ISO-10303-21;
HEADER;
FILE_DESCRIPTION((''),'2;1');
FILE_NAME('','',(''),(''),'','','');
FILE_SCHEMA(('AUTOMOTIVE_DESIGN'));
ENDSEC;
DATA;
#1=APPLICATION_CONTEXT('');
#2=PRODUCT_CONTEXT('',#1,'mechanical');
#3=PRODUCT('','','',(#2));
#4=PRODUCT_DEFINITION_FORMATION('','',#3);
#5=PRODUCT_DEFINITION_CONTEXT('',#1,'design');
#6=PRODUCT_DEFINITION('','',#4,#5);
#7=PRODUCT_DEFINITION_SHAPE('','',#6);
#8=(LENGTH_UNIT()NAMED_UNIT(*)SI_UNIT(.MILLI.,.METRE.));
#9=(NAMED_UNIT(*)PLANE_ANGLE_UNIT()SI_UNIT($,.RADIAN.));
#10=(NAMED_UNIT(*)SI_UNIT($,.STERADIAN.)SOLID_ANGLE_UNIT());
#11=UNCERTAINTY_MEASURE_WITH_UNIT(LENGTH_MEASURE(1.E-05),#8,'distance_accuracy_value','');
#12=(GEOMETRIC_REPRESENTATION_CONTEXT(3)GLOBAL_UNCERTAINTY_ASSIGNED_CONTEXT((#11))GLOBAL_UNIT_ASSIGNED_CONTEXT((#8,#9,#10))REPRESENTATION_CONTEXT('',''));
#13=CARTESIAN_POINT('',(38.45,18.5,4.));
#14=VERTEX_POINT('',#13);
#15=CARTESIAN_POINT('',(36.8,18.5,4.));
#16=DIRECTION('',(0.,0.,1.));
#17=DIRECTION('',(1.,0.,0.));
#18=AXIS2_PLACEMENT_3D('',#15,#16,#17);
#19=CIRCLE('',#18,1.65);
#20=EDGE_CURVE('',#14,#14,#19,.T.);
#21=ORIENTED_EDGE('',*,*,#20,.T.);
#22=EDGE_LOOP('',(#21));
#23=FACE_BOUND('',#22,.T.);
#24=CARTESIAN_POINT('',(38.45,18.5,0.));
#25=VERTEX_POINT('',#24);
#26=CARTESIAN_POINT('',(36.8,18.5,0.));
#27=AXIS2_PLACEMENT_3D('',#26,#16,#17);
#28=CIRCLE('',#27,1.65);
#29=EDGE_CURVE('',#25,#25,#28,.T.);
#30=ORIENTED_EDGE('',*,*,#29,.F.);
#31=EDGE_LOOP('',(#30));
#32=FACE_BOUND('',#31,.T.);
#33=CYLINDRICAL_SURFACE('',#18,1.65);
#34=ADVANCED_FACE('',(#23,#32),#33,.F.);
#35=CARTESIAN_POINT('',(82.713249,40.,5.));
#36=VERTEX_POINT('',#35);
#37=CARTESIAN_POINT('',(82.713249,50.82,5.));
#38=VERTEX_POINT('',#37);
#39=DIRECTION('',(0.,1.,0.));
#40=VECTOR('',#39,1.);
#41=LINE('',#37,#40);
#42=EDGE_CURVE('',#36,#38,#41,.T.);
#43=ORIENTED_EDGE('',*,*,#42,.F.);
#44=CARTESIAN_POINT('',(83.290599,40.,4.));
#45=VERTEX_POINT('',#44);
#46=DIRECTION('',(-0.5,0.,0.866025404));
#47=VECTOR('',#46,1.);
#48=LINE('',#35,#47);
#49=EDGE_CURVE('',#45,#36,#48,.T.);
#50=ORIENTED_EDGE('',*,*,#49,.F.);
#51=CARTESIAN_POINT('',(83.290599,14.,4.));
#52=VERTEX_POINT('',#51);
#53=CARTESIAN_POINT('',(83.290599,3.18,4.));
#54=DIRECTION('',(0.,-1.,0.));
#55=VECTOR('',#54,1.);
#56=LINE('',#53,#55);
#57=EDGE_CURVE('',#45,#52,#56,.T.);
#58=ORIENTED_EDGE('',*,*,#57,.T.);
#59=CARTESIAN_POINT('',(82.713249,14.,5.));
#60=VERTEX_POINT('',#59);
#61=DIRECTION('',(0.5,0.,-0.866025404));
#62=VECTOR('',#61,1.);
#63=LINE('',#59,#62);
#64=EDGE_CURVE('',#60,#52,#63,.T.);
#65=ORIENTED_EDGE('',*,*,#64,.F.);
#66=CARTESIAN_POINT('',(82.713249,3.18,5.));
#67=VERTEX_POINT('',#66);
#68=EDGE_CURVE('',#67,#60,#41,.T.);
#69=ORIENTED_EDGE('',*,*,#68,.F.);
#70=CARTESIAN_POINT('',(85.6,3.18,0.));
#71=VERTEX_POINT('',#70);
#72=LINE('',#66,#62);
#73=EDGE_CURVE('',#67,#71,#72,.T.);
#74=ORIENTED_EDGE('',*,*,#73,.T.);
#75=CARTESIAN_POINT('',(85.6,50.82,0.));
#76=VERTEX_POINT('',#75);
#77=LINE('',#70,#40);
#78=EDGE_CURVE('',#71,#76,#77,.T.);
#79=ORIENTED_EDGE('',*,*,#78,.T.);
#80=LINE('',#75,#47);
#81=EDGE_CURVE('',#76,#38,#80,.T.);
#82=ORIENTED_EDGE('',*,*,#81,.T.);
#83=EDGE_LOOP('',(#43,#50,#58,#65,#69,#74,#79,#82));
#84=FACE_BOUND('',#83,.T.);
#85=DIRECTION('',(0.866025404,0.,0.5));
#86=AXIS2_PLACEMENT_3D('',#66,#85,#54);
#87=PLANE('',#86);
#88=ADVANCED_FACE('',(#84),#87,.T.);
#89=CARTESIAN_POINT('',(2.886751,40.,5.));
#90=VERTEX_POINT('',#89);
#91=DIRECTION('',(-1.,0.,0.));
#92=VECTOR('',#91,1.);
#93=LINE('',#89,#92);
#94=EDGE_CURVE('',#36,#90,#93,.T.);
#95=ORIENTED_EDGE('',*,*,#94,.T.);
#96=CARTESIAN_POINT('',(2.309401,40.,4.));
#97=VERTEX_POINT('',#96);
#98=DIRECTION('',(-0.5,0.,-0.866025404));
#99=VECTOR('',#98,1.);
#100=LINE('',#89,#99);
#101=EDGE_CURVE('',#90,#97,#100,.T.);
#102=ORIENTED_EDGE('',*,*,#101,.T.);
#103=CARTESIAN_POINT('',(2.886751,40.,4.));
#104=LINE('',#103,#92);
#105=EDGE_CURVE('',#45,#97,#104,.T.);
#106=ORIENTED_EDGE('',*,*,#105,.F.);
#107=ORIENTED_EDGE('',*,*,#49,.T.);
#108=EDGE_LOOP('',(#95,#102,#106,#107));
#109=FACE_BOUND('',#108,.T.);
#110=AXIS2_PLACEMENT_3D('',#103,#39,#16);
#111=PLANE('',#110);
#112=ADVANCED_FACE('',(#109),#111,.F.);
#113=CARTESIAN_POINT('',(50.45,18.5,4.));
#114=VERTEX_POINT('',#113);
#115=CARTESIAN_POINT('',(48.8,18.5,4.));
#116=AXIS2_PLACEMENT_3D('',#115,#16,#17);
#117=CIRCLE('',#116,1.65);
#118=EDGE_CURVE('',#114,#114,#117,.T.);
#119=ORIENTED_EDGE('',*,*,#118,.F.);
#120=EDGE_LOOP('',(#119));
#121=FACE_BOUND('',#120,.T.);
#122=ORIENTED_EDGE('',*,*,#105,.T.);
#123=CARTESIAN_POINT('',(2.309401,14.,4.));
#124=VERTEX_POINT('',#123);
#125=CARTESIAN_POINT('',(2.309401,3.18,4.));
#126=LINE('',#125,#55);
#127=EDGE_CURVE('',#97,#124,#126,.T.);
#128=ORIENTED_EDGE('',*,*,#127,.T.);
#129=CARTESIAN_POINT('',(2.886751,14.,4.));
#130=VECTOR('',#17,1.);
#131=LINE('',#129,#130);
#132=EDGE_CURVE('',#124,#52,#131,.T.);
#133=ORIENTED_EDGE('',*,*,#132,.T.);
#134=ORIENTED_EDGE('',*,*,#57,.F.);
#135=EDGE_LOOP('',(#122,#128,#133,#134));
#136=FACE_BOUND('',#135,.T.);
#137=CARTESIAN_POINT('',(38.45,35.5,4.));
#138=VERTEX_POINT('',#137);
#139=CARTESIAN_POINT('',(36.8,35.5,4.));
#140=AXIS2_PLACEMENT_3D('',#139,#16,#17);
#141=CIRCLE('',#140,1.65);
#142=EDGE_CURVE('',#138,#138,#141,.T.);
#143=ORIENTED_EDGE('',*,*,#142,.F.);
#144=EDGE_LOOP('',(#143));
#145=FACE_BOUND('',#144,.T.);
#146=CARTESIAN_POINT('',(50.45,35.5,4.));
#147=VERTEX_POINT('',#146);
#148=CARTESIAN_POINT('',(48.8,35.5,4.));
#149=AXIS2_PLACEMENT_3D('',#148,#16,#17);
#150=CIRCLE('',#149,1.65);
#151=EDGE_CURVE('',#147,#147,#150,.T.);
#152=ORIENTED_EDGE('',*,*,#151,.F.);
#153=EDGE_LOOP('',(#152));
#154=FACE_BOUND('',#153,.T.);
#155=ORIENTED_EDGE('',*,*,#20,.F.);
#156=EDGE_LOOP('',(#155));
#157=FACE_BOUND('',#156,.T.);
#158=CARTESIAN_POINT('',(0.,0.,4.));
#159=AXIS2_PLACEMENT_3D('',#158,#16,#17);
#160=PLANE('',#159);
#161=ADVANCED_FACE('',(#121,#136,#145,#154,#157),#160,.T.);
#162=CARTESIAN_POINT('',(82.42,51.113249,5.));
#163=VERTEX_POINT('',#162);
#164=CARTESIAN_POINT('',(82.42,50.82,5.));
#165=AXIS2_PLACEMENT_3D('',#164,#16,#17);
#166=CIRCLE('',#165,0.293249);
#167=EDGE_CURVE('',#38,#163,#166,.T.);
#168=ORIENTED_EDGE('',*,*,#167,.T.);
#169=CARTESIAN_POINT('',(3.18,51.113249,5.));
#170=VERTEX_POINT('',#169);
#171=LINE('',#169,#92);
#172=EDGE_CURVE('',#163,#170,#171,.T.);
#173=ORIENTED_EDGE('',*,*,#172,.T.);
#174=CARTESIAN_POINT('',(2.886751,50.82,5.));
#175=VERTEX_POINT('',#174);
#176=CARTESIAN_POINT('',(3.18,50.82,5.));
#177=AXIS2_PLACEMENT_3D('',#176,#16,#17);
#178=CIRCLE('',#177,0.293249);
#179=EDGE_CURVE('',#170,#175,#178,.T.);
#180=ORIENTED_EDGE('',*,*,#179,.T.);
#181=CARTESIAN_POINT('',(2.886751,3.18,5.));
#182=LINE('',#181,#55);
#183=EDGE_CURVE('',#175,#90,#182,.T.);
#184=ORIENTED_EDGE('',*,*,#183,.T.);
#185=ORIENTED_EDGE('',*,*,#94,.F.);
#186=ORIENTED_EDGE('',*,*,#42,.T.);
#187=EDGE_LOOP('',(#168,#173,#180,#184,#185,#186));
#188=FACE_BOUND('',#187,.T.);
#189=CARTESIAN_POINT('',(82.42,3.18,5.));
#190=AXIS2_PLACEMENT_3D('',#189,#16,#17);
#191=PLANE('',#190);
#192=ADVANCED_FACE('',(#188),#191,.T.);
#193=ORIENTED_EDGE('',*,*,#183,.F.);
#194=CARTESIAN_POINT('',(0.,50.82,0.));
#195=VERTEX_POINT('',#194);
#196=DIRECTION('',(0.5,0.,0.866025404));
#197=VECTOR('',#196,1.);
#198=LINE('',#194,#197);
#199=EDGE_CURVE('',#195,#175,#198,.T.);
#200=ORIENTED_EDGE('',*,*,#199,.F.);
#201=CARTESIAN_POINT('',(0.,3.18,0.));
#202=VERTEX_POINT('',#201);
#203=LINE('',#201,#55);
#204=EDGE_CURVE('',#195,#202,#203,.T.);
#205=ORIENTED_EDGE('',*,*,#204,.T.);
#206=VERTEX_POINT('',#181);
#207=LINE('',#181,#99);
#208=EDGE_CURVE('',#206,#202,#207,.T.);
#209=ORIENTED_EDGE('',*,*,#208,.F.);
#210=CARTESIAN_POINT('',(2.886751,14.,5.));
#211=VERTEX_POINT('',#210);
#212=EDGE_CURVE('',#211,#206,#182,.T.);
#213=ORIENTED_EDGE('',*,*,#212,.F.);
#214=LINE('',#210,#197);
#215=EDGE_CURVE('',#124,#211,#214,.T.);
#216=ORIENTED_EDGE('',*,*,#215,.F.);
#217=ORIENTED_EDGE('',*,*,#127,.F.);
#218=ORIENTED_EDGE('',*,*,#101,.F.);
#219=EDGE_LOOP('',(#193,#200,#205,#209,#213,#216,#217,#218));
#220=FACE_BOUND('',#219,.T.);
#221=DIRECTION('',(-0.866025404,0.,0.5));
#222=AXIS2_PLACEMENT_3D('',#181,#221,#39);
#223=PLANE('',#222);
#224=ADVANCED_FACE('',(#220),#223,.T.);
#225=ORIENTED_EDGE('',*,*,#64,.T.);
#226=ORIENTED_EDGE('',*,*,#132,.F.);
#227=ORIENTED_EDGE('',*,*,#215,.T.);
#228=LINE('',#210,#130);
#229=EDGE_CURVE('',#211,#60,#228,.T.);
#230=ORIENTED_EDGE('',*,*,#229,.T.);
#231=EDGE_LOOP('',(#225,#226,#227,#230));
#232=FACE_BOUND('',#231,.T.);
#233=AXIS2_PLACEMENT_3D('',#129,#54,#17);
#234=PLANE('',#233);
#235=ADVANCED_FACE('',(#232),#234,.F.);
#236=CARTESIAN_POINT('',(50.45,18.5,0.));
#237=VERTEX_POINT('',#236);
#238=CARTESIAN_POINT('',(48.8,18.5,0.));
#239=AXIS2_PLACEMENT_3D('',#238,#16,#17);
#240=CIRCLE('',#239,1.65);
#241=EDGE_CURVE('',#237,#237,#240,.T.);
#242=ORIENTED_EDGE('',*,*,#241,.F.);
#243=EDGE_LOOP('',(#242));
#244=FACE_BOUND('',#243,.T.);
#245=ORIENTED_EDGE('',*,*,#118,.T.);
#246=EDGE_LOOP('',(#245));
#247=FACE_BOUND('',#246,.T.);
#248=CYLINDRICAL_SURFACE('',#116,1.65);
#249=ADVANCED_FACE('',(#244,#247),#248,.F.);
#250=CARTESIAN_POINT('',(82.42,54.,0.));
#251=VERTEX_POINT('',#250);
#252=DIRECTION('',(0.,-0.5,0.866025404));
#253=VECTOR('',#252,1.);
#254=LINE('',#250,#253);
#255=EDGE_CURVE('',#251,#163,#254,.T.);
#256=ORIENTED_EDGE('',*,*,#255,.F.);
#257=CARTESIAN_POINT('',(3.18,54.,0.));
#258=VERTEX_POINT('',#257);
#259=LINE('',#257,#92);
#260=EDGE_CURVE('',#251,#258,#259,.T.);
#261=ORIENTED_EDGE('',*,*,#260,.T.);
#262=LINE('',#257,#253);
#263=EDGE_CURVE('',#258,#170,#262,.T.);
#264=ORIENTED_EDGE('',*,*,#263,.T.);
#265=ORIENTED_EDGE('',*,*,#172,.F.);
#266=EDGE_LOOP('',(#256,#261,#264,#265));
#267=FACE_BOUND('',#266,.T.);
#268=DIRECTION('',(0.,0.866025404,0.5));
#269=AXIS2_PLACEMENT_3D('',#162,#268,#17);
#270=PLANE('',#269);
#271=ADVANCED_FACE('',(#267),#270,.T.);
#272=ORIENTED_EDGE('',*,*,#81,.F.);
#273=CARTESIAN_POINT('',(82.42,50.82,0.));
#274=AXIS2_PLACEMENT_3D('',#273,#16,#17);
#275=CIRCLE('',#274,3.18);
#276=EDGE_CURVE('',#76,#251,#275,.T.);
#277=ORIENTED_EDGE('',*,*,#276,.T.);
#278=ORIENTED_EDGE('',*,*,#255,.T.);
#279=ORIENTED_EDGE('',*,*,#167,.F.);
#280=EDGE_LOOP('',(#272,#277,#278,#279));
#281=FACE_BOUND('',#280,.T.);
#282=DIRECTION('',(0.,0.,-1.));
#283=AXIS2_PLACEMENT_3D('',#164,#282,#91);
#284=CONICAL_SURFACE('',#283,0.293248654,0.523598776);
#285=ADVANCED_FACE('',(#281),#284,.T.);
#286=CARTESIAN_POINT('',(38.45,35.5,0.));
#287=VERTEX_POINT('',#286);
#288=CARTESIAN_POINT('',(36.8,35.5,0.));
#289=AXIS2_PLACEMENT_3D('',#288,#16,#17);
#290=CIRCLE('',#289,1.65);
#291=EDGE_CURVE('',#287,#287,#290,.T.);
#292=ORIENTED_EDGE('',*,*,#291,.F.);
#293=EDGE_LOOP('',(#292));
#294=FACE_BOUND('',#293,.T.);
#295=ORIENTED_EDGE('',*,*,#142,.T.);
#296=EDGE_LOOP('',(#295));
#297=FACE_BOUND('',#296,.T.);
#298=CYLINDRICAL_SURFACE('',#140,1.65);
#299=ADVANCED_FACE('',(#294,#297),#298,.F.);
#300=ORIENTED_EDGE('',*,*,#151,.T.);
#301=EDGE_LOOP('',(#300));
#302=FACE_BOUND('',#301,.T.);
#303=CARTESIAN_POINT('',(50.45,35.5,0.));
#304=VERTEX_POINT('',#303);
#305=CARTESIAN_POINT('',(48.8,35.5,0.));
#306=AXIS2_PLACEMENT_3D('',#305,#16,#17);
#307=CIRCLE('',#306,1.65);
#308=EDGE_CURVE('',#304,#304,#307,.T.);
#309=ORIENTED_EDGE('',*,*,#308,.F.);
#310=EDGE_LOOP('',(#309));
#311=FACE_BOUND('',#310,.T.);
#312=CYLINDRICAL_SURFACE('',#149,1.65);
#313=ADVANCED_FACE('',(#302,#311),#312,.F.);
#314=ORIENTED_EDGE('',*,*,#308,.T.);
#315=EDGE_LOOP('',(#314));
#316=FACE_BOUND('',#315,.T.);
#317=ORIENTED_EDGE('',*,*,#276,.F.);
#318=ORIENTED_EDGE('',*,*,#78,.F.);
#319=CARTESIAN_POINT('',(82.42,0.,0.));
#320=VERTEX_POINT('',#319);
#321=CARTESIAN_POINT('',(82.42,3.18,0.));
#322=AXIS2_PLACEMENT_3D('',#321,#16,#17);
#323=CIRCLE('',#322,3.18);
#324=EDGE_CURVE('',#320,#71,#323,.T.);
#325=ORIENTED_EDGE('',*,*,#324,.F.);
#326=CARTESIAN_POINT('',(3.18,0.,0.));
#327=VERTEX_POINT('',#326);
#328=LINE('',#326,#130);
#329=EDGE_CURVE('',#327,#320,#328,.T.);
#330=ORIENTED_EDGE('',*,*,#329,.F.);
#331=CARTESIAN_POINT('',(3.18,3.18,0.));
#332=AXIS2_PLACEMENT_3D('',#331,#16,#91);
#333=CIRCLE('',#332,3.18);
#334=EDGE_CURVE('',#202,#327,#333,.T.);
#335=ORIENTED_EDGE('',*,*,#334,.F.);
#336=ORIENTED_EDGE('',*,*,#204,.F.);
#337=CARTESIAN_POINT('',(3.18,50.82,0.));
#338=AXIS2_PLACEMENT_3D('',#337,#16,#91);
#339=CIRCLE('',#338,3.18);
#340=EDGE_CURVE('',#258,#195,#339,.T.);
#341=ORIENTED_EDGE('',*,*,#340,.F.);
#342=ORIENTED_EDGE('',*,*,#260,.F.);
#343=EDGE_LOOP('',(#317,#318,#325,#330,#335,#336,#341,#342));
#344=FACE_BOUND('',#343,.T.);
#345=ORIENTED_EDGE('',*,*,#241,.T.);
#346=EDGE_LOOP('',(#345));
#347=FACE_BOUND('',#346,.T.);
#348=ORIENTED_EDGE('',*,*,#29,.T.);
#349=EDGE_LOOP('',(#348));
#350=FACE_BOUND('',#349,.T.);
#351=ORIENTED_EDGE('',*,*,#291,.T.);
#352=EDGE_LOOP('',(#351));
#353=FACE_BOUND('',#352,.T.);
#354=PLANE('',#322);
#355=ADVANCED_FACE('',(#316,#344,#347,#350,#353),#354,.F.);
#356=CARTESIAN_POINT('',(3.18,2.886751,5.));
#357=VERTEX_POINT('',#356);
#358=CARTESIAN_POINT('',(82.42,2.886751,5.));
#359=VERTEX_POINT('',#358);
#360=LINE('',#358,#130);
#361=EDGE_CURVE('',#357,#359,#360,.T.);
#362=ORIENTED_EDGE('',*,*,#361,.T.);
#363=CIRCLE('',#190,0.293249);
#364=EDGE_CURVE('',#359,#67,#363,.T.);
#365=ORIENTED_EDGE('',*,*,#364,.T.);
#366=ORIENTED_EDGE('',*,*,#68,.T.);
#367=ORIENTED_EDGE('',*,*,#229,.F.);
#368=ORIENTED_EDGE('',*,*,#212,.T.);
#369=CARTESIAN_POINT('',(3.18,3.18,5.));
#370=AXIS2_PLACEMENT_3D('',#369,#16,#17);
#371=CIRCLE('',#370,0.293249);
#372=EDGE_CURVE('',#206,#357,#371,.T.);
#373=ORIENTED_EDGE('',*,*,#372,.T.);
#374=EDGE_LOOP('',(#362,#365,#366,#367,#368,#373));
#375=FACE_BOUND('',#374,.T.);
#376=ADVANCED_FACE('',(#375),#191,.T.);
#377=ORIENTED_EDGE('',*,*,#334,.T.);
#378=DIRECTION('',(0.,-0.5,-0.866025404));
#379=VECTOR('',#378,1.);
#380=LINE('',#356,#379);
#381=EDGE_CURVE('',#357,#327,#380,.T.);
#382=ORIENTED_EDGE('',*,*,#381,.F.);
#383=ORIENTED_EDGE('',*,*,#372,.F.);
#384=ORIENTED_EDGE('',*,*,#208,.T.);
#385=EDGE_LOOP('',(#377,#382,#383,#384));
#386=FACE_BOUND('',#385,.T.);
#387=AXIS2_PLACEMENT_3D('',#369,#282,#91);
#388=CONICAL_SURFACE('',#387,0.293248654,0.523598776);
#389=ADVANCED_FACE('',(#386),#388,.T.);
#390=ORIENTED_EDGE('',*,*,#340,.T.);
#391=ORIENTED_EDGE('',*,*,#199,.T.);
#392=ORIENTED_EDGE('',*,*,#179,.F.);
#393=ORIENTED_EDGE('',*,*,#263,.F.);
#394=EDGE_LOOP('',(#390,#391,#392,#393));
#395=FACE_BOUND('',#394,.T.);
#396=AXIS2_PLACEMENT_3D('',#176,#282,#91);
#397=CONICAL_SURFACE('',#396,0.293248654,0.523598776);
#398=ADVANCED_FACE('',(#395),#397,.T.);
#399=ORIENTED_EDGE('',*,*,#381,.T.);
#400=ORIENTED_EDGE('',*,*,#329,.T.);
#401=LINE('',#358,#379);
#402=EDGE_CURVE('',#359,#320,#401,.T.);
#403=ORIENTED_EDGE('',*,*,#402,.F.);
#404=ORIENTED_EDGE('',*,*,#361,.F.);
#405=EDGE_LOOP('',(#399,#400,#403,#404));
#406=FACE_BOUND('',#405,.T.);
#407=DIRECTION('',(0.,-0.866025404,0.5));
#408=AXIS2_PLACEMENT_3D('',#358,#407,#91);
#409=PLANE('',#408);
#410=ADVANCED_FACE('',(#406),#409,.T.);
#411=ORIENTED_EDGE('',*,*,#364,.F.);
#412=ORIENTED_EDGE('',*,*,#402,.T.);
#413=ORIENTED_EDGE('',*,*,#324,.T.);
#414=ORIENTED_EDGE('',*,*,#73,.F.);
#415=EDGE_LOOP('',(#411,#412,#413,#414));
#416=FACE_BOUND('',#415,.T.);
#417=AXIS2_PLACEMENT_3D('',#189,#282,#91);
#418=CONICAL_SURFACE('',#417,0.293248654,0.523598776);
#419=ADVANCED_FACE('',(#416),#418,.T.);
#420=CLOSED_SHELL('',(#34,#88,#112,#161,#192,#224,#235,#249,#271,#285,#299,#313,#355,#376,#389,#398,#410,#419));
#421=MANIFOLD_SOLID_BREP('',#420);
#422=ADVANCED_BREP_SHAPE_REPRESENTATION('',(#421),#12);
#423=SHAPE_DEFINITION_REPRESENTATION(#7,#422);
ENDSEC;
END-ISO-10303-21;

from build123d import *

# Parameters (mm, degrees)
EXTRUDE_1_DEPTH        = 5
CHAMFER_2_SIZE         = 5
CHAMFER_2_SIZE_2       = 2.886751346
SKETCH_5_W             = 92.306776668
SKETCH_5_H             = 26
CUT_EXTRUDE_2_DEPTH    = 1
SKETCH_6_W             = 1
SKETCH_6_H             = 26
CUT_EXTRUDE_3_DEPTH    = 5
HOLE_WIZARD_M4_3_D     = 3.3
HOLE_WIZARD_M4_3_DEPTH = 10.1
HOLE_WIZARD_M4_3_TIP   = 0.991420021


with BuildPart() as part:
    # 草图1 → 凸台-拉伸1 (new body)
    with BuildSketch(Plane.XY):
        with BuildLine():
            Line((3.18, 0), (82.42, 0))
            ThreePointArc((82.42, 0), (84.668599564, 0.931400436), (85.6, 3.18))
            Line((85.6, 3.18), (85.6, 50.82))
            ThreePointArc((85.6, 50.82), (84.668599564, 53.068599564), (82.42, 54))
            Line((82.42, 54), (3.18, 54))
            ThreePointArc((3.18, 54), (0.931400436, 53.068599564), (0, 50.82))
            Line((0, 50.82), (0, 3.18))
            ThreePointArc((0, 3.18), (0.931400436, 0.931400436), (3.18, 0))
        make_face()
    extrude(amount=EXTRUDE_1_DEPTH)

    # 倒角2
    # the kernel refuses this chamfer: 5, 2.886751346 mm, written as the material it takes off along each edge
    with BuildSketch(Plane(origin=(85.6, 3.18, 5), x_dir=(0.019326765612699606, 0, -0.9998132206222079), z_dir=(0, 1, 0)), Plane(origin=(0, 50.82, 5), x_dir=(-0.019326765612700733, 0, -0.9998132206222079), z_dir=(0, -1, 0))) as chamfer_2_piece_1:
        Polygon((CHAMFER_2_SIZE * 0.999813220622, CHAMFER_2_SIZE * 0.0193267656127), (-CHAMFER_2_SIZE_2 * 0.0193267656124, CHAMFER_2_SIZE_2 * 0.999813220604), (0, 0), align=None)
    extrude(amount=47.64, mode=Mode.SUBTRACT)
    with BuildSketch(Plane(origin=(82.42, 50.82, 5), x_dir=(1, 0, 0), z_dir=(0, -1, 0))) as chamfer_2_piece_2:
        Polygon((3.18, -CHAMFER_2_SIZE), (3.18 - CHAMFER_2_SIZE_2, 0), (3.18, 0), align=None)
    revolve(axis=Axis((82.42, 50.82, 5), (0, 0, 1)), revolution_arc=90, mode=Mode.SUBTRACT)
    with BuildSketch(Plane(origin=(82.42, 3.18, 5), x_dir=(0, -1, 0), z_dir=(-1, 0, 0))) as chamfer_2_piece_3:
        Polygon((3.18, -CHAMFER_2_SIZE), (3.18 - CHAMFER_2_SIZE_2, 0), (3.18, 0), align=None)
    revolve(axis=Axis((82.42, 3.18, 5), (0, 0, 1)), revolution_arc=90, mode=Mode.SUBTRACT)
    with BuildSketch(Plane(origin=(82.42, 54, 5), x_dir=(0, 0.01932676561270098, -0.9998132206222079), z_dir=(-1, 0, 0)), Plane(origin=(3.18, 0, 5), x_dir=(0, -0.019326765612700754, -0.9998132206222079), z_dir=(1, 0, 0))) as chamfer_2_piece_4:
        Polygon((CHAMFER_2_SIZE * 0.999813220622, CHAMFER_2_SIZE * 0.0193267656127), (-CHAMFER_2_SIZE_2 * 0.0193267656124, CHAMFER_2_SIZE_2 * 0.999813220604), (0, 0), align=None)
    extrude(amount=79.24, mode=Mode.SUBTRACT)
    with BuildSketch(Plane(origin=(3.18, 50.82, 5), x_dir=(0, 1, 0), z_dir=(1, 0, 0))) as chamfer_2_piece_5:
        Polygon((3.18, -CHAMFER_2_SIZE), (3.18 - CHAMFER_2_SIZE_2, 0), (3.18, 0), align=None)
    revolve(axis=Axis((3.18, 50.82, 5), (0, 0, 1)), revolution_arc=90, mode=Mode.SUBTRACT)
    with BuildSketch(Plane(origin=(3.18, 3.18, 5), x_dir=(-1, 0, 0), z_dir=(0, 1, 0))) as chamfer_2_piece_6:
        Polygon((3.18, -CHAMFER_2_SIZE), (3.18 - CHAMFER_2_SIZE_2, 0), (3.18, 0), align=None)
    revolve(axis=Axis((3.18, 3.18, 5), (0, 0, 1)), revolution_arc=90, mode=Mode.SUBTRACT)

    # 草图5 → 切除-拉伸2 (cut)
    with BuildSketch(Plane.XY.offset(5)):
        with Locations((49.04013968, 27)):
            Rectangle(SKETCH_5_W, SKETCH_5_H)
    extrude(amount=-CUT_EXTRUDE_2_DEPTH, mode=Mode.SUBTRACT)

    # 草图6 → 切除-拉伸3 (cut)
    with BuildSketch(Plane(origin=(2.886751346, 0, 0), x_dir=(0, 0, -1), z_dir=(1, 0, 0))):
        with Locations((-4.5, 27)):
            Rectangle(SKETCH_6_W, SKETCH_6_H)
    extrude(amount=-CUT_EXTRUDE_3_DEPTH, mode=Mode.SUBTRACT)

    # M4 螺纹孔3
    with Locations(Plane.XY.offset(4)):
        with Locations((48.8, 18.5), (48.8, 35.5), (36.8, 18.5), (36.8, 35.5)):
            Hole(HOLE_WIZARD_M4_3_D / 2, depth=HOLE_WIZARD_M4_3_DEPTH)
            with Locations((0, 0, -(HOLE_WIZARD_M4_3_DEPTH + HOLE_WIZARD_M4_3_TIP / 2))):  # 118° drill point
                Cone(0, HOLE_WIZARD_M4_3_D / 2, HOLE_WIZARD_M4_3_TIP, mode=Mode.SUBTRACT)


solid = part.part
